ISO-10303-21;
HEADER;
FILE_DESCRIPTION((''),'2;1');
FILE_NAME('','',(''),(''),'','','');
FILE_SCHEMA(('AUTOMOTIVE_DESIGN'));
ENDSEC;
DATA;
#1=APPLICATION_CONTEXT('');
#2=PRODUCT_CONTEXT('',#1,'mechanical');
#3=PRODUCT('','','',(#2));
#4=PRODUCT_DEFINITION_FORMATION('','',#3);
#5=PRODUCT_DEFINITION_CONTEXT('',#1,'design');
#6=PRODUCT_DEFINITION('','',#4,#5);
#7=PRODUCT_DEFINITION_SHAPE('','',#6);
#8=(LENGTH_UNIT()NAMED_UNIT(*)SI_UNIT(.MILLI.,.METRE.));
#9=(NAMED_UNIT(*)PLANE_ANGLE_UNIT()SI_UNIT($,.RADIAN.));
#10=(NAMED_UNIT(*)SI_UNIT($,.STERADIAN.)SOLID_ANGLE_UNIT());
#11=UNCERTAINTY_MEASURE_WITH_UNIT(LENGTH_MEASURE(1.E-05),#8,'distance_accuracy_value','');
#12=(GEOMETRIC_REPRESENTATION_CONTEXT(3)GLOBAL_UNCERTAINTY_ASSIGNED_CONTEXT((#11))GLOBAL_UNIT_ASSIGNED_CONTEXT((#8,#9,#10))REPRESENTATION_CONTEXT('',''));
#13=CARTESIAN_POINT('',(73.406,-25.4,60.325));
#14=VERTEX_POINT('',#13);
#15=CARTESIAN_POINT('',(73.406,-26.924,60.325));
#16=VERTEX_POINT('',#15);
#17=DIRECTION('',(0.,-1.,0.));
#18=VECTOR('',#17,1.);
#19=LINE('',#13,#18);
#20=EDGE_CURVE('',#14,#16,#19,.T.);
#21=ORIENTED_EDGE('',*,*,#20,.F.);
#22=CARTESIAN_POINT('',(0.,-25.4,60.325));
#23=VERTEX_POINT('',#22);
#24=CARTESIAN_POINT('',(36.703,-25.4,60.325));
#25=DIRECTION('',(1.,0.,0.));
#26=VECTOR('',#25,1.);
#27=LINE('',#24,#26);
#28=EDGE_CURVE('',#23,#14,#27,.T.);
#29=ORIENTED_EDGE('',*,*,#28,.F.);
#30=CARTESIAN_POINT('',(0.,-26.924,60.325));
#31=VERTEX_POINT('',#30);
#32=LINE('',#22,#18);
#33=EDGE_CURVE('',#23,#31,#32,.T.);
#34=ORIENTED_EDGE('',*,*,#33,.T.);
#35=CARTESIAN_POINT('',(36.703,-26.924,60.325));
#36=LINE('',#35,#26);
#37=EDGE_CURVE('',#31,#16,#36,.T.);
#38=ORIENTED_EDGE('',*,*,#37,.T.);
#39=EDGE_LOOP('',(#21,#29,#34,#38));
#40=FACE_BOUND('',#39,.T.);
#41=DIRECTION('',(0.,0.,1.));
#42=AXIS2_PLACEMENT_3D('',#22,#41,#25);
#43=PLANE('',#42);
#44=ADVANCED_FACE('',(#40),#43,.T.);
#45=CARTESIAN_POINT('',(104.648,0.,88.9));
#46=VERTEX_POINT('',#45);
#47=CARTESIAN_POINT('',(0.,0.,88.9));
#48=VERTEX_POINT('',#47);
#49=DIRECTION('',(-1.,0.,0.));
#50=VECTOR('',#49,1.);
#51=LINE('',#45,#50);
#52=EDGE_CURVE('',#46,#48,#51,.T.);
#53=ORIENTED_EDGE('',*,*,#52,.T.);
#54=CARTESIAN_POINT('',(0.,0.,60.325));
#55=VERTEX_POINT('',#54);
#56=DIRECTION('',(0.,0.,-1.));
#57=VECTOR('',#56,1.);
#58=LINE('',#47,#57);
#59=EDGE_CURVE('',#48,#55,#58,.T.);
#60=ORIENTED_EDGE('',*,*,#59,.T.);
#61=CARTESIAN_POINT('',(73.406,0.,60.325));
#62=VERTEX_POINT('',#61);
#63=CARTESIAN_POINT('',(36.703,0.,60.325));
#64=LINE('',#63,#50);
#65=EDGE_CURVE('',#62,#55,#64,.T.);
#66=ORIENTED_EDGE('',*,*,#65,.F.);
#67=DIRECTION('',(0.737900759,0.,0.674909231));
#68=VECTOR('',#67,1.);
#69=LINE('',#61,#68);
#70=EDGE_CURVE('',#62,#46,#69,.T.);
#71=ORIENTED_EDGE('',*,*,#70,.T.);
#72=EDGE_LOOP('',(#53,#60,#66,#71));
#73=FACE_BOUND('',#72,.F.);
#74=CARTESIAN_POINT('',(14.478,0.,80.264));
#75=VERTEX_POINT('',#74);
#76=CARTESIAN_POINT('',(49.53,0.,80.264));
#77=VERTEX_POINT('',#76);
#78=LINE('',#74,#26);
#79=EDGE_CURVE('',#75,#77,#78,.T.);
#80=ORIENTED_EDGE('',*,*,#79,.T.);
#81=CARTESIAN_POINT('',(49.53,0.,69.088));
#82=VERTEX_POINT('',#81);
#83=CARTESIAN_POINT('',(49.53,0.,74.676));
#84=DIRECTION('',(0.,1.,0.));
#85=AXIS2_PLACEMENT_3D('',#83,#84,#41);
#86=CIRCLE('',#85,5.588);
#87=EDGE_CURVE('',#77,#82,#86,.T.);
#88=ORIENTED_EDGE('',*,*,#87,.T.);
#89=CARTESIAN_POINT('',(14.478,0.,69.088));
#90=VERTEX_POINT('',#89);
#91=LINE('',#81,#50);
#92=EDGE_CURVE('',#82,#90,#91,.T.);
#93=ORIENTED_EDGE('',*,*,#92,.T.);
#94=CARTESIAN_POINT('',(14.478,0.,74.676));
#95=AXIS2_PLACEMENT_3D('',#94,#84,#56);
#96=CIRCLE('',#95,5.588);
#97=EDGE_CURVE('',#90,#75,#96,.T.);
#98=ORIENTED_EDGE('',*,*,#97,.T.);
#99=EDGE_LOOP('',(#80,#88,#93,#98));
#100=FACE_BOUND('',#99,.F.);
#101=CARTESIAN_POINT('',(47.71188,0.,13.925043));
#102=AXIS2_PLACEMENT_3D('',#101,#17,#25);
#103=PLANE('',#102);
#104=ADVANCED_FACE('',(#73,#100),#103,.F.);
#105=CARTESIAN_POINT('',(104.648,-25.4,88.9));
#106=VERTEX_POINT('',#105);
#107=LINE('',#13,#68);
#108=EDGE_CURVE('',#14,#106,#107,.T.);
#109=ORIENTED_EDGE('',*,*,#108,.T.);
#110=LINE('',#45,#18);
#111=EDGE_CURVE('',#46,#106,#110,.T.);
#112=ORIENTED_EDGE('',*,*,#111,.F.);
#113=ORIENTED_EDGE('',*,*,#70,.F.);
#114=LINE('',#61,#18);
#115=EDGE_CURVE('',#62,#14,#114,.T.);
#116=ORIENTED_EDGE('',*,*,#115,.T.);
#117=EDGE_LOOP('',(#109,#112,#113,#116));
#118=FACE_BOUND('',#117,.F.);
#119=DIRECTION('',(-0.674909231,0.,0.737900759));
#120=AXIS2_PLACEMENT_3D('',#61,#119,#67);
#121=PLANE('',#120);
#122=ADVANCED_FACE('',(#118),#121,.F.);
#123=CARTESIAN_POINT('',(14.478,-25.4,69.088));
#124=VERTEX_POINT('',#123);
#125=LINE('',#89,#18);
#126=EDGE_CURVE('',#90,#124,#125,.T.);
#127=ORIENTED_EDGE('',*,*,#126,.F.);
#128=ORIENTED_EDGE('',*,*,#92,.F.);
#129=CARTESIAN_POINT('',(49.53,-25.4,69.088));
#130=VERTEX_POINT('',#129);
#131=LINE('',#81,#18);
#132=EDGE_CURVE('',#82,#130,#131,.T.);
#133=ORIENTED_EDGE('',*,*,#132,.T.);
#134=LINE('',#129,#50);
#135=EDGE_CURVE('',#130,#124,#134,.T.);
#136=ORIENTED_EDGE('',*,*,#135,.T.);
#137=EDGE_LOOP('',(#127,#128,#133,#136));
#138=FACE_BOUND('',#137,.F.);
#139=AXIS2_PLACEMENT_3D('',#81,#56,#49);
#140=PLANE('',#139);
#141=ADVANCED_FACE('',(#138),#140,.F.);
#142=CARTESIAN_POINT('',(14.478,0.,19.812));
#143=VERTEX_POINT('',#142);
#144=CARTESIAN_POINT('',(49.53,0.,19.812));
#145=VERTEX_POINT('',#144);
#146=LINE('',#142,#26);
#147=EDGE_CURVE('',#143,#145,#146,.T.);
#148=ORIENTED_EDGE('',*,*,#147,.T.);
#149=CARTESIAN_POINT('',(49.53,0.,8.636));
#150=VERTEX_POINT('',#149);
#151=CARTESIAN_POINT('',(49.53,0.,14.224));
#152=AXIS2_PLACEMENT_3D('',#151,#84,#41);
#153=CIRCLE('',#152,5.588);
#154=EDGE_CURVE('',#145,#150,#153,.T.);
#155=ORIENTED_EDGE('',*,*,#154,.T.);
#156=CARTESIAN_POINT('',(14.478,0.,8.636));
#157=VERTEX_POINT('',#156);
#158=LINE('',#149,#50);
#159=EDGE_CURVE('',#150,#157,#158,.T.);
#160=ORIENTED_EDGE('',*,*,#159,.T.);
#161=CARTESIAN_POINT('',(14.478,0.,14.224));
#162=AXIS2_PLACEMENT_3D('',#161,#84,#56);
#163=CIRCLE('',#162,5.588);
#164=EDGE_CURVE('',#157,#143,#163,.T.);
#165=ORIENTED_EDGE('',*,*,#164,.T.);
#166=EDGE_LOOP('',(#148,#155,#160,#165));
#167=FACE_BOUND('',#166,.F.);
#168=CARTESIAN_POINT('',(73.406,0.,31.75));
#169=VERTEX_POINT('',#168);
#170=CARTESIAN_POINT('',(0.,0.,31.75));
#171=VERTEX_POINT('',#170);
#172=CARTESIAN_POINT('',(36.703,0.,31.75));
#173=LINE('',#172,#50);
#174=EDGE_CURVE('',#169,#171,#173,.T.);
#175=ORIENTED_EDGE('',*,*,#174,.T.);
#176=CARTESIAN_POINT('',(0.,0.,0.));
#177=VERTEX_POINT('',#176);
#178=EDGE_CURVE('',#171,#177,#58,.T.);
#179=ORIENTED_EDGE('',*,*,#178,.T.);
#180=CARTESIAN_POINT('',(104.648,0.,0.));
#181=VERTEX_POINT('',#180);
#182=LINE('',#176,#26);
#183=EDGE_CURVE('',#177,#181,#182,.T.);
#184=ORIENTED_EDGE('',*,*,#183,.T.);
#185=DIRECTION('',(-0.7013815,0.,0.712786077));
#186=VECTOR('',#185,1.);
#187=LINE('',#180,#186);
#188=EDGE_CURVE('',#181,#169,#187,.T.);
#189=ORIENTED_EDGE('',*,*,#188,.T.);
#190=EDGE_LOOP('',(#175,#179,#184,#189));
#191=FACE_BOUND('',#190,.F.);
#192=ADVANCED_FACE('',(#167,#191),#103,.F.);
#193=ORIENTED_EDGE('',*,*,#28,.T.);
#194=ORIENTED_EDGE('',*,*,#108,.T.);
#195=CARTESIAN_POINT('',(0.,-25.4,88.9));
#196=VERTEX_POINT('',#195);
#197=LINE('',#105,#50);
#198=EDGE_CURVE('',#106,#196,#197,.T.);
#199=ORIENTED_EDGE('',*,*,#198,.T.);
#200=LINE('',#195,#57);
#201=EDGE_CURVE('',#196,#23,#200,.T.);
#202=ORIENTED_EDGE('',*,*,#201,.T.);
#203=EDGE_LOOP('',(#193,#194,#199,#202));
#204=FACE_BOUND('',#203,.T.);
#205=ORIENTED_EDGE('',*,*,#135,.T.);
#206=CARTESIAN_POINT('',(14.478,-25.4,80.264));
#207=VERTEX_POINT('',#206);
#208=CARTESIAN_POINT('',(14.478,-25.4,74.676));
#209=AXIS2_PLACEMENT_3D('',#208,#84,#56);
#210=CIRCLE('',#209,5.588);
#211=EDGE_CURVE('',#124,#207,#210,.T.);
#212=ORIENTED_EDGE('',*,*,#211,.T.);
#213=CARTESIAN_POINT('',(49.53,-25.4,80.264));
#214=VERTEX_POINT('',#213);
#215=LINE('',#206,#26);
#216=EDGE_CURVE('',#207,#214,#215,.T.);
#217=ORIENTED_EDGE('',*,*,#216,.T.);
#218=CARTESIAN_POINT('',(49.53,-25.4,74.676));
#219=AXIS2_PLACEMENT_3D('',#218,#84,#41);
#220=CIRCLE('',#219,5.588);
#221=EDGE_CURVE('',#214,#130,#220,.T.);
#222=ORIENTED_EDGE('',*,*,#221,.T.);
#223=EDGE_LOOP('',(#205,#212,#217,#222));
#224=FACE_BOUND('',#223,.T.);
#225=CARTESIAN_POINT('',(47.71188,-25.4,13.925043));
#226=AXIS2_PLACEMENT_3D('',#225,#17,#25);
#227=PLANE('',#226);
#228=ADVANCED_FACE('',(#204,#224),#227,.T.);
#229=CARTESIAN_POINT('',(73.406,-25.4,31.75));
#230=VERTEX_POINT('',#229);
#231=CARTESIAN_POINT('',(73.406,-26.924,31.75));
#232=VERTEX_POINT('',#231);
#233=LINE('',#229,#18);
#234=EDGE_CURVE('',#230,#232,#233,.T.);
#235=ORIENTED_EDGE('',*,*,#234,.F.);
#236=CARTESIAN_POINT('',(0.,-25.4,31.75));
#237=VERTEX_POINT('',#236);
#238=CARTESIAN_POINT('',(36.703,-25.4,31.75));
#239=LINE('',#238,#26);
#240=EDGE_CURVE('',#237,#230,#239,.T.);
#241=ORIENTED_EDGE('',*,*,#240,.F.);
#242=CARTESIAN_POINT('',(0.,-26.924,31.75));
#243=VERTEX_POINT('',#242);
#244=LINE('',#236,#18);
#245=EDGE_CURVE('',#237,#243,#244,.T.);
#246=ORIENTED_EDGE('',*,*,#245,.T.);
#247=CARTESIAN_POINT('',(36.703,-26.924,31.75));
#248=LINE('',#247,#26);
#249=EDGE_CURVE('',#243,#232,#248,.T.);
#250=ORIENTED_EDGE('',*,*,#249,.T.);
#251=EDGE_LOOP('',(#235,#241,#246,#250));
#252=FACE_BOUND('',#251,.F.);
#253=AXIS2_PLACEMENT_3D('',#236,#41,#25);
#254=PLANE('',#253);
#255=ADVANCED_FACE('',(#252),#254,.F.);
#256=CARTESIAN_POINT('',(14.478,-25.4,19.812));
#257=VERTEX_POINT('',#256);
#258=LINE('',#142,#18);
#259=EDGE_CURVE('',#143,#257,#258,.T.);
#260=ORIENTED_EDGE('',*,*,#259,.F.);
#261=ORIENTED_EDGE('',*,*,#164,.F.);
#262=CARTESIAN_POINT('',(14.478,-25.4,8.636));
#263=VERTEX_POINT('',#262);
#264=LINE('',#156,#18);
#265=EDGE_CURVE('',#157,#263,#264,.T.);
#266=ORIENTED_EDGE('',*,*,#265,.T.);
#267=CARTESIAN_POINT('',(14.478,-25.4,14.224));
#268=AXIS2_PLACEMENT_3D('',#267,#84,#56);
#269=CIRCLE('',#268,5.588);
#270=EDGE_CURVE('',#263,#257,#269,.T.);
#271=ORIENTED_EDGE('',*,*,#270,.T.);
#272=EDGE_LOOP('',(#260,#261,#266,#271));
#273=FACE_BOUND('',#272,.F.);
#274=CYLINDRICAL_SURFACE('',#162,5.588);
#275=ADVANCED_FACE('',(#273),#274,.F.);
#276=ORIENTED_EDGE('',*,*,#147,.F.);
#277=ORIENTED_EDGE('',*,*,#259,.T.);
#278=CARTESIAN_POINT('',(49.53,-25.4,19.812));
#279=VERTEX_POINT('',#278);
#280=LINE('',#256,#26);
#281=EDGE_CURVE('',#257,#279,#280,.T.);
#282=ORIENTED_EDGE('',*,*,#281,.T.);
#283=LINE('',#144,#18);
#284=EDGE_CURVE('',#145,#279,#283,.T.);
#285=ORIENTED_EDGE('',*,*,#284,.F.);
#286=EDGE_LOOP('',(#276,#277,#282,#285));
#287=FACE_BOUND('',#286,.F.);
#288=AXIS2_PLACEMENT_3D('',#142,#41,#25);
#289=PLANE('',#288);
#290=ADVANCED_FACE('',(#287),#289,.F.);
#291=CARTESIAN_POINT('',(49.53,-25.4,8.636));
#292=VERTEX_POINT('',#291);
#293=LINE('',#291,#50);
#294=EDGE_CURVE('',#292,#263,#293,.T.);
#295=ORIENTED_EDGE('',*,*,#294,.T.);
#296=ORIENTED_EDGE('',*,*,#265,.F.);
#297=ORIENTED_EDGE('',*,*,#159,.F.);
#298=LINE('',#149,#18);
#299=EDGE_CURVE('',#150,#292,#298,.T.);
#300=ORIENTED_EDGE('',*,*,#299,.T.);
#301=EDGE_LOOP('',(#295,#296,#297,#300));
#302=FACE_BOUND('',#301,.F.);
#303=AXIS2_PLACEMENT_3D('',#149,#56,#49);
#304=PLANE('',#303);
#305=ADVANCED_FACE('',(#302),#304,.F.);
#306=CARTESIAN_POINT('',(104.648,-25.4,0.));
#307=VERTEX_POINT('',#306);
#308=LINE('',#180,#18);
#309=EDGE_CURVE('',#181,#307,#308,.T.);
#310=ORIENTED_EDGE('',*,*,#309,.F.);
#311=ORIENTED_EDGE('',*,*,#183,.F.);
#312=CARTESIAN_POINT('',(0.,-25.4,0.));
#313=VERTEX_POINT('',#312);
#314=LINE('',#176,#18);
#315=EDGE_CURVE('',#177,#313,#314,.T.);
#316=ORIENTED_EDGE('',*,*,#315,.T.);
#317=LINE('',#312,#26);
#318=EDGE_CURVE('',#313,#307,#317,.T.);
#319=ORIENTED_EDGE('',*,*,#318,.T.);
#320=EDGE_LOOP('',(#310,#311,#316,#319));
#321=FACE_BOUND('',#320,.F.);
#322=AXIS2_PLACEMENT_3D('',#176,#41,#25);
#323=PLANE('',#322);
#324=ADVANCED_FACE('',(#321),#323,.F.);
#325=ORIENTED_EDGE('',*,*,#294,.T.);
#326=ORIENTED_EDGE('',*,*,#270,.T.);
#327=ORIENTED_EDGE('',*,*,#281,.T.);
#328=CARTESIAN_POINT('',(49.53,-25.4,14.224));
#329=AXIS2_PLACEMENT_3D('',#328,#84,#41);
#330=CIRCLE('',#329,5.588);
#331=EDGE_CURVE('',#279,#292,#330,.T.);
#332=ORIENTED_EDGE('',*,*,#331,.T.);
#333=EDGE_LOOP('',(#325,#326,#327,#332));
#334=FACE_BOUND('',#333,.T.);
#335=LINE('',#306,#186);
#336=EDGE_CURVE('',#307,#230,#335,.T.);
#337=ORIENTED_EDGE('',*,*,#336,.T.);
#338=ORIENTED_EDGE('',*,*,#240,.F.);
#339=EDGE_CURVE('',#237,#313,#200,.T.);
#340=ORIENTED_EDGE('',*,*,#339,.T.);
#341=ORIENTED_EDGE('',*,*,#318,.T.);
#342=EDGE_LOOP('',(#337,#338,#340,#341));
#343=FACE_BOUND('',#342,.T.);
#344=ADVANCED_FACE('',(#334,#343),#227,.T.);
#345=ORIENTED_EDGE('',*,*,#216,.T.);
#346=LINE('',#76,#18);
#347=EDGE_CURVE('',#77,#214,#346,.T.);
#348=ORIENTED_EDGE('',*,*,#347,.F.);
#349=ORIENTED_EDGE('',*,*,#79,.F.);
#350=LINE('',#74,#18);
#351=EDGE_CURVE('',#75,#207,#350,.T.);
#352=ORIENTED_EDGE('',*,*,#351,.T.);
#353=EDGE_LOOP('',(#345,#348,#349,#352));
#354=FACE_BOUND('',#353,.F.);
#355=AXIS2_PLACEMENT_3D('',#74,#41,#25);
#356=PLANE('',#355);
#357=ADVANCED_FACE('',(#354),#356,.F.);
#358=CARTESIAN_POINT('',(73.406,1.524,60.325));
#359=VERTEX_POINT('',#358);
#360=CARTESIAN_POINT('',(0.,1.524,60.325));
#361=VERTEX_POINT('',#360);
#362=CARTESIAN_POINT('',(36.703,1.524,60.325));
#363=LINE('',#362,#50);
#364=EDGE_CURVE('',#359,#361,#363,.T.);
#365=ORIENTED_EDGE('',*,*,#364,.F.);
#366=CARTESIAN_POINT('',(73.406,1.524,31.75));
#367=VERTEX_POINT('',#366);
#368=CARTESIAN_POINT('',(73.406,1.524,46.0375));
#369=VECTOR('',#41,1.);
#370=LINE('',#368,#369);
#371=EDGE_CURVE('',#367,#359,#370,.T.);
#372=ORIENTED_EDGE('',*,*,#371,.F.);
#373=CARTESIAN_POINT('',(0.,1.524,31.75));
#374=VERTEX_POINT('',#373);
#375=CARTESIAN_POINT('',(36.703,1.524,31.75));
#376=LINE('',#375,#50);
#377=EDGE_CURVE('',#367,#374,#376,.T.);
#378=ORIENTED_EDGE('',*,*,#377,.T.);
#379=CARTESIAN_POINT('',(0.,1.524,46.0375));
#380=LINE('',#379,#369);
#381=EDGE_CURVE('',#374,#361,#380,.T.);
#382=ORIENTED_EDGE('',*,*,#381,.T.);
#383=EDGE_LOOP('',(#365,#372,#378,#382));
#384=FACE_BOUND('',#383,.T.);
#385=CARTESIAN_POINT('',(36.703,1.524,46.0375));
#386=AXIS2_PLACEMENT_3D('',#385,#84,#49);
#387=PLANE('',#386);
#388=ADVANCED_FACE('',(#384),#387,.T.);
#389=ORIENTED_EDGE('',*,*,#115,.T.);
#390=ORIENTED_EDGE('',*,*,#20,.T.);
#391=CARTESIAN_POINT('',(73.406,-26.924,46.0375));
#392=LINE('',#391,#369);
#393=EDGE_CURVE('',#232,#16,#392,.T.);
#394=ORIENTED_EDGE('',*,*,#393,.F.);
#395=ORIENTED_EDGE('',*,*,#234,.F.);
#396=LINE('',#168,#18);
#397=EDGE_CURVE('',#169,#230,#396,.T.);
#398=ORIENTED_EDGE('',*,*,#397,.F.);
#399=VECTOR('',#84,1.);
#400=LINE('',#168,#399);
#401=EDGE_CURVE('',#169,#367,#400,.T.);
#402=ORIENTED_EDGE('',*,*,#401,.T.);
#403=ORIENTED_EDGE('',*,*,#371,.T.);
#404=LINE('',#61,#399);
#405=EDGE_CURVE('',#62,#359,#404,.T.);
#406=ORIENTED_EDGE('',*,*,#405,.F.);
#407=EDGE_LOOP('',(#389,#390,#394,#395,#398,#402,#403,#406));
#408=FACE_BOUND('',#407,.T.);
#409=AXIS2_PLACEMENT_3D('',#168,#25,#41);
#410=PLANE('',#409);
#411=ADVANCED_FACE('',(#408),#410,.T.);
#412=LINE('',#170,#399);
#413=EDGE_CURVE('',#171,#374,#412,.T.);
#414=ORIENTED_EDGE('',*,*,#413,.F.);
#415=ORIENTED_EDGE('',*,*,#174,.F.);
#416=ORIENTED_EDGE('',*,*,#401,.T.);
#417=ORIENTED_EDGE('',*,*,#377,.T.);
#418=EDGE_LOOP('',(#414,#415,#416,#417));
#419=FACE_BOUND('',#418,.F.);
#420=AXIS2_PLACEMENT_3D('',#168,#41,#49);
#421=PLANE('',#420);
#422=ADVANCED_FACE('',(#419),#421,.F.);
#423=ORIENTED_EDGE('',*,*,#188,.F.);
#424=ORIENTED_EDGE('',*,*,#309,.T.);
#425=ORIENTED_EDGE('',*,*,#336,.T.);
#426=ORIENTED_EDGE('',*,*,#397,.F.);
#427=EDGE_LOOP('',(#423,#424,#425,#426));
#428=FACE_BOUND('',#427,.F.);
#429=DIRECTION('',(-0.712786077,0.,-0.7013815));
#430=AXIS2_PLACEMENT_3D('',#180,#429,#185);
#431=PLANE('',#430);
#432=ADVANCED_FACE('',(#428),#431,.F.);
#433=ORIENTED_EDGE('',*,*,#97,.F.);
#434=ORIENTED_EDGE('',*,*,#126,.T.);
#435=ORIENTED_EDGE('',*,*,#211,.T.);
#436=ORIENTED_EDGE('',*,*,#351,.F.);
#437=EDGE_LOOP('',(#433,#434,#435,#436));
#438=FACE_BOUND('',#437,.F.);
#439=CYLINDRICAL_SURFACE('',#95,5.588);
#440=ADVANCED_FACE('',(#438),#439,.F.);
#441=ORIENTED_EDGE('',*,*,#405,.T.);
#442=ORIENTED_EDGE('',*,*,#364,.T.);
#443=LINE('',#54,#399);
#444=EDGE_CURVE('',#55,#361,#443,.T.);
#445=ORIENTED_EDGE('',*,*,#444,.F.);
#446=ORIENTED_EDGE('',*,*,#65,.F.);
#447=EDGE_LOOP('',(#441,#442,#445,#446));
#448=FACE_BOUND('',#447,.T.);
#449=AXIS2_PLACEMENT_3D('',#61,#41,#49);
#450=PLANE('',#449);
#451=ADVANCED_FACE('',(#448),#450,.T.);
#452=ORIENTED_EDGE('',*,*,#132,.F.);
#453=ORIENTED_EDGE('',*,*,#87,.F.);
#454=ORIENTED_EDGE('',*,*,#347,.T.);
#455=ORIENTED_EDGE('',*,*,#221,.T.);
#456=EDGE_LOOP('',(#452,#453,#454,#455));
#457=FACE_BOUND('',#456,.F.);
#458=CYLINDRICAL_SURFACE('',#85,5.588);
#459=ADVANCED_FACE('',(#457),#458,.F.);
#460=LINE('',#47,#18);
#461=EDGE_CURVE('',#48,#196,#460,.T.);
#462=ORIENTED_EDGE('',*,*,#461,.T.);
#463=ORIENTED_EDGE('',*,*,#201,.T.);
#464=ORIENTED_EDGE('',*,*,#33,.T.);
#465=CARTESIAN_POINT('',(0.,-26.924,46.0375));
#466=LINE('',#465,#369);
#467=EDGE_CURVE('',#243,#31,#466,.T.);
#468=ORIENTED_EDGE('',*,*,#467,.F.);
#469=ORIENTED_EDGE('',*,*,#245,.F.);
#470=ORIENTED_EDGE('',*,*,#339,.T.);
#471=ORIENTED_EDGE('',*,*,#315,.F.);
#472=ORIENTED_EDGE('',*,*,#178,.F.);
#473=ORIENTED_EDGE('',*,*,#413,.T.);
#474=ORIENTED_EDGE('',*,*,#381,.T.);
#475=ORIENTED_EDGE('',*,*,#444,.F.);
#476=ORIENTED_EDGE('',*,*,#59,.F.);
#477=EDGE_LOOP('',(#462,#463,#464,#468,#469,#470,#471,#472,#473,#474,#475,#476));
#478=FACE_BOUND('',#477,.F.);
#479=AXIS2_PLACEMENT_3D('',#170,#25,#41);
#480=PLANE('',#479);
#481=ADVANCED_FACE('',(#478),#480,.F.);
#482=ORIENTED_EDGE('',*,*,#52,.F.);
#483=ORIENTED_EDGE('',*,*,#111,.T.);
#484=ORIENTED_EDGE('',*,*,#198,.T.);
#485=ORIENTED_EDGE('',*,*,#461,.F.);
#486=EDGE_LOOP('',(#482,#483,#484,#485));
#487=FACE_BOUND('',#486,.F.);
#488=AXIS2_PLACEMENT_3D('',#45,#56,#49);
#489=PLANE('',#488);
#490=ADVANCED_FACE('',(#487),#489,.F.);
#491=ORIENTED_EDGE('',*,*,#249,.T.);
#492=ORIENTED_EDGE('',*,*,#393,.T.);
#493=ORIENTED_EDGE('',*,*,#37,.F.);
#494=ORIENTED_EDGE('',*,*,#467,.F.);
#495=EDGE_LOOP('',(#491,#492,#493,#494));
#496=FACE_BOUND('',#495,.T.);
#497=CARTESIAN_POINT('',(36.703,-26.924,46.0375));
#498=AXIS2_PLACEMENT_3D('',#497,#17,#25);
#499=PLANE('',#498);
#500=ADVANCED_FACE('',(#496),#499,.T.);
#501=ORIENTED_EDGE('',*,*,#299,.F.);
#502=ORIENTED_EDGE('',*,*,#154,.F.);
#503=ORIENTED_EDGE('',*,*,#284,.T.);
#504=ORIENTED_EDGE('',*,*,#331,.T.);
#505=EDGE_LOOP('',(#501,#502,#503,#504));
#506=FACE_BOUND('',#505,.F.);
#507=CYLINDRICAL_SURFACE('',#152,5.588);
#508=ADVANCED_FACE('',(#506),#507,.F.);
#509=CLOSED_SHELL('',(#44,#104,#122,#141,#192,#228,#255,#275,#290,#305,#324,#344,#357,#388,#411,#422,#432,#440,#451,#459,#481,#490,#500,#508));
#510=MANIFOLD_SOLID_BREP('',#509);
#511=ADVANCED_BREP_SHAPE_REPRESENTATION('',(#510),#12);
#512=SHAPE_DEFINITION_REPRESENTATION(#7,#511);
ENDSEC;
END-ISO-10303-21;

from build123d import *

# Parameters (mm, degrees)
F0_W     = 73.406
F0_H     = 28.575
F1_DEPTH = 25.4
F2_W     = 73.406
F2_H     = 28.575
F3_DEPTH = 1.524
F4_W     = 73.406
F4_H     = 28.575
F5_DEPTH = 1.524


with BuildPart() as f1:
    # F0 (on Front) → F1 (new body)
    with BuildSketch(Plane.XZ):
        Polygon((0, 31.75), (0, 0), (104.648, 0), (73.406, 31.75), align=None)
        with BuildLine():
            Line((49.53, 8.636), (14.478, 8.636))
            ThreePointArc((14.478, 8.636), (8.89, 14.224), (14.478, 19.812))
            Line((14.478, 19.812), (49.53, 19.812))
            ThreePointArc((49.53, 19.812), (55.118, 14.224), (49.53, 8.636))
        make_face(mode=Mode.SUBTRACT)
        with Locations((36.703, 46.0375)):
            Rectangle(F0_W, F0_H)
        Polygon((0, 88.9), (0, 60.325), (73.406, 60.325), (104.648, 88.9), align=None)
        with BuildLine():
            Line((49.53, 69.088), (14.478, 69.088))
            ThreePointArc((14.478, 69.088), (8.89, 74.676), (14.478, 80.264))
            Line((14.478, 80.264), (49.53, 80.264))
            ThreePointArc((49.53, 80.264), (55.118, 74.676), (49.53, 69.088))
        make_face(mode=Mode.SUBTRACT)
    extrude(amount=F1_DEPTH)

    # F2 (on face) → F3 (join)
    with BuildSketch(Plane.XZ.offset(25.4)):
        with Locations((36.703, 46.0375)):
            Rectangle(F2_W, F2_H)
    extrude(amount=F3_DEPTH)

    # F4 (on face) → F5 (join)
    with BuildSketch(Plane(origin=(0, 0, 0), x_dir=(-1, 0, 0), z_dir=(0, 1, 0))):
        with Locations((-36.703, 46.0375)):
            Rectangle(F4_W, F4_H)
    extrude(amount=F5_DEPTH)


solid = f1.part
